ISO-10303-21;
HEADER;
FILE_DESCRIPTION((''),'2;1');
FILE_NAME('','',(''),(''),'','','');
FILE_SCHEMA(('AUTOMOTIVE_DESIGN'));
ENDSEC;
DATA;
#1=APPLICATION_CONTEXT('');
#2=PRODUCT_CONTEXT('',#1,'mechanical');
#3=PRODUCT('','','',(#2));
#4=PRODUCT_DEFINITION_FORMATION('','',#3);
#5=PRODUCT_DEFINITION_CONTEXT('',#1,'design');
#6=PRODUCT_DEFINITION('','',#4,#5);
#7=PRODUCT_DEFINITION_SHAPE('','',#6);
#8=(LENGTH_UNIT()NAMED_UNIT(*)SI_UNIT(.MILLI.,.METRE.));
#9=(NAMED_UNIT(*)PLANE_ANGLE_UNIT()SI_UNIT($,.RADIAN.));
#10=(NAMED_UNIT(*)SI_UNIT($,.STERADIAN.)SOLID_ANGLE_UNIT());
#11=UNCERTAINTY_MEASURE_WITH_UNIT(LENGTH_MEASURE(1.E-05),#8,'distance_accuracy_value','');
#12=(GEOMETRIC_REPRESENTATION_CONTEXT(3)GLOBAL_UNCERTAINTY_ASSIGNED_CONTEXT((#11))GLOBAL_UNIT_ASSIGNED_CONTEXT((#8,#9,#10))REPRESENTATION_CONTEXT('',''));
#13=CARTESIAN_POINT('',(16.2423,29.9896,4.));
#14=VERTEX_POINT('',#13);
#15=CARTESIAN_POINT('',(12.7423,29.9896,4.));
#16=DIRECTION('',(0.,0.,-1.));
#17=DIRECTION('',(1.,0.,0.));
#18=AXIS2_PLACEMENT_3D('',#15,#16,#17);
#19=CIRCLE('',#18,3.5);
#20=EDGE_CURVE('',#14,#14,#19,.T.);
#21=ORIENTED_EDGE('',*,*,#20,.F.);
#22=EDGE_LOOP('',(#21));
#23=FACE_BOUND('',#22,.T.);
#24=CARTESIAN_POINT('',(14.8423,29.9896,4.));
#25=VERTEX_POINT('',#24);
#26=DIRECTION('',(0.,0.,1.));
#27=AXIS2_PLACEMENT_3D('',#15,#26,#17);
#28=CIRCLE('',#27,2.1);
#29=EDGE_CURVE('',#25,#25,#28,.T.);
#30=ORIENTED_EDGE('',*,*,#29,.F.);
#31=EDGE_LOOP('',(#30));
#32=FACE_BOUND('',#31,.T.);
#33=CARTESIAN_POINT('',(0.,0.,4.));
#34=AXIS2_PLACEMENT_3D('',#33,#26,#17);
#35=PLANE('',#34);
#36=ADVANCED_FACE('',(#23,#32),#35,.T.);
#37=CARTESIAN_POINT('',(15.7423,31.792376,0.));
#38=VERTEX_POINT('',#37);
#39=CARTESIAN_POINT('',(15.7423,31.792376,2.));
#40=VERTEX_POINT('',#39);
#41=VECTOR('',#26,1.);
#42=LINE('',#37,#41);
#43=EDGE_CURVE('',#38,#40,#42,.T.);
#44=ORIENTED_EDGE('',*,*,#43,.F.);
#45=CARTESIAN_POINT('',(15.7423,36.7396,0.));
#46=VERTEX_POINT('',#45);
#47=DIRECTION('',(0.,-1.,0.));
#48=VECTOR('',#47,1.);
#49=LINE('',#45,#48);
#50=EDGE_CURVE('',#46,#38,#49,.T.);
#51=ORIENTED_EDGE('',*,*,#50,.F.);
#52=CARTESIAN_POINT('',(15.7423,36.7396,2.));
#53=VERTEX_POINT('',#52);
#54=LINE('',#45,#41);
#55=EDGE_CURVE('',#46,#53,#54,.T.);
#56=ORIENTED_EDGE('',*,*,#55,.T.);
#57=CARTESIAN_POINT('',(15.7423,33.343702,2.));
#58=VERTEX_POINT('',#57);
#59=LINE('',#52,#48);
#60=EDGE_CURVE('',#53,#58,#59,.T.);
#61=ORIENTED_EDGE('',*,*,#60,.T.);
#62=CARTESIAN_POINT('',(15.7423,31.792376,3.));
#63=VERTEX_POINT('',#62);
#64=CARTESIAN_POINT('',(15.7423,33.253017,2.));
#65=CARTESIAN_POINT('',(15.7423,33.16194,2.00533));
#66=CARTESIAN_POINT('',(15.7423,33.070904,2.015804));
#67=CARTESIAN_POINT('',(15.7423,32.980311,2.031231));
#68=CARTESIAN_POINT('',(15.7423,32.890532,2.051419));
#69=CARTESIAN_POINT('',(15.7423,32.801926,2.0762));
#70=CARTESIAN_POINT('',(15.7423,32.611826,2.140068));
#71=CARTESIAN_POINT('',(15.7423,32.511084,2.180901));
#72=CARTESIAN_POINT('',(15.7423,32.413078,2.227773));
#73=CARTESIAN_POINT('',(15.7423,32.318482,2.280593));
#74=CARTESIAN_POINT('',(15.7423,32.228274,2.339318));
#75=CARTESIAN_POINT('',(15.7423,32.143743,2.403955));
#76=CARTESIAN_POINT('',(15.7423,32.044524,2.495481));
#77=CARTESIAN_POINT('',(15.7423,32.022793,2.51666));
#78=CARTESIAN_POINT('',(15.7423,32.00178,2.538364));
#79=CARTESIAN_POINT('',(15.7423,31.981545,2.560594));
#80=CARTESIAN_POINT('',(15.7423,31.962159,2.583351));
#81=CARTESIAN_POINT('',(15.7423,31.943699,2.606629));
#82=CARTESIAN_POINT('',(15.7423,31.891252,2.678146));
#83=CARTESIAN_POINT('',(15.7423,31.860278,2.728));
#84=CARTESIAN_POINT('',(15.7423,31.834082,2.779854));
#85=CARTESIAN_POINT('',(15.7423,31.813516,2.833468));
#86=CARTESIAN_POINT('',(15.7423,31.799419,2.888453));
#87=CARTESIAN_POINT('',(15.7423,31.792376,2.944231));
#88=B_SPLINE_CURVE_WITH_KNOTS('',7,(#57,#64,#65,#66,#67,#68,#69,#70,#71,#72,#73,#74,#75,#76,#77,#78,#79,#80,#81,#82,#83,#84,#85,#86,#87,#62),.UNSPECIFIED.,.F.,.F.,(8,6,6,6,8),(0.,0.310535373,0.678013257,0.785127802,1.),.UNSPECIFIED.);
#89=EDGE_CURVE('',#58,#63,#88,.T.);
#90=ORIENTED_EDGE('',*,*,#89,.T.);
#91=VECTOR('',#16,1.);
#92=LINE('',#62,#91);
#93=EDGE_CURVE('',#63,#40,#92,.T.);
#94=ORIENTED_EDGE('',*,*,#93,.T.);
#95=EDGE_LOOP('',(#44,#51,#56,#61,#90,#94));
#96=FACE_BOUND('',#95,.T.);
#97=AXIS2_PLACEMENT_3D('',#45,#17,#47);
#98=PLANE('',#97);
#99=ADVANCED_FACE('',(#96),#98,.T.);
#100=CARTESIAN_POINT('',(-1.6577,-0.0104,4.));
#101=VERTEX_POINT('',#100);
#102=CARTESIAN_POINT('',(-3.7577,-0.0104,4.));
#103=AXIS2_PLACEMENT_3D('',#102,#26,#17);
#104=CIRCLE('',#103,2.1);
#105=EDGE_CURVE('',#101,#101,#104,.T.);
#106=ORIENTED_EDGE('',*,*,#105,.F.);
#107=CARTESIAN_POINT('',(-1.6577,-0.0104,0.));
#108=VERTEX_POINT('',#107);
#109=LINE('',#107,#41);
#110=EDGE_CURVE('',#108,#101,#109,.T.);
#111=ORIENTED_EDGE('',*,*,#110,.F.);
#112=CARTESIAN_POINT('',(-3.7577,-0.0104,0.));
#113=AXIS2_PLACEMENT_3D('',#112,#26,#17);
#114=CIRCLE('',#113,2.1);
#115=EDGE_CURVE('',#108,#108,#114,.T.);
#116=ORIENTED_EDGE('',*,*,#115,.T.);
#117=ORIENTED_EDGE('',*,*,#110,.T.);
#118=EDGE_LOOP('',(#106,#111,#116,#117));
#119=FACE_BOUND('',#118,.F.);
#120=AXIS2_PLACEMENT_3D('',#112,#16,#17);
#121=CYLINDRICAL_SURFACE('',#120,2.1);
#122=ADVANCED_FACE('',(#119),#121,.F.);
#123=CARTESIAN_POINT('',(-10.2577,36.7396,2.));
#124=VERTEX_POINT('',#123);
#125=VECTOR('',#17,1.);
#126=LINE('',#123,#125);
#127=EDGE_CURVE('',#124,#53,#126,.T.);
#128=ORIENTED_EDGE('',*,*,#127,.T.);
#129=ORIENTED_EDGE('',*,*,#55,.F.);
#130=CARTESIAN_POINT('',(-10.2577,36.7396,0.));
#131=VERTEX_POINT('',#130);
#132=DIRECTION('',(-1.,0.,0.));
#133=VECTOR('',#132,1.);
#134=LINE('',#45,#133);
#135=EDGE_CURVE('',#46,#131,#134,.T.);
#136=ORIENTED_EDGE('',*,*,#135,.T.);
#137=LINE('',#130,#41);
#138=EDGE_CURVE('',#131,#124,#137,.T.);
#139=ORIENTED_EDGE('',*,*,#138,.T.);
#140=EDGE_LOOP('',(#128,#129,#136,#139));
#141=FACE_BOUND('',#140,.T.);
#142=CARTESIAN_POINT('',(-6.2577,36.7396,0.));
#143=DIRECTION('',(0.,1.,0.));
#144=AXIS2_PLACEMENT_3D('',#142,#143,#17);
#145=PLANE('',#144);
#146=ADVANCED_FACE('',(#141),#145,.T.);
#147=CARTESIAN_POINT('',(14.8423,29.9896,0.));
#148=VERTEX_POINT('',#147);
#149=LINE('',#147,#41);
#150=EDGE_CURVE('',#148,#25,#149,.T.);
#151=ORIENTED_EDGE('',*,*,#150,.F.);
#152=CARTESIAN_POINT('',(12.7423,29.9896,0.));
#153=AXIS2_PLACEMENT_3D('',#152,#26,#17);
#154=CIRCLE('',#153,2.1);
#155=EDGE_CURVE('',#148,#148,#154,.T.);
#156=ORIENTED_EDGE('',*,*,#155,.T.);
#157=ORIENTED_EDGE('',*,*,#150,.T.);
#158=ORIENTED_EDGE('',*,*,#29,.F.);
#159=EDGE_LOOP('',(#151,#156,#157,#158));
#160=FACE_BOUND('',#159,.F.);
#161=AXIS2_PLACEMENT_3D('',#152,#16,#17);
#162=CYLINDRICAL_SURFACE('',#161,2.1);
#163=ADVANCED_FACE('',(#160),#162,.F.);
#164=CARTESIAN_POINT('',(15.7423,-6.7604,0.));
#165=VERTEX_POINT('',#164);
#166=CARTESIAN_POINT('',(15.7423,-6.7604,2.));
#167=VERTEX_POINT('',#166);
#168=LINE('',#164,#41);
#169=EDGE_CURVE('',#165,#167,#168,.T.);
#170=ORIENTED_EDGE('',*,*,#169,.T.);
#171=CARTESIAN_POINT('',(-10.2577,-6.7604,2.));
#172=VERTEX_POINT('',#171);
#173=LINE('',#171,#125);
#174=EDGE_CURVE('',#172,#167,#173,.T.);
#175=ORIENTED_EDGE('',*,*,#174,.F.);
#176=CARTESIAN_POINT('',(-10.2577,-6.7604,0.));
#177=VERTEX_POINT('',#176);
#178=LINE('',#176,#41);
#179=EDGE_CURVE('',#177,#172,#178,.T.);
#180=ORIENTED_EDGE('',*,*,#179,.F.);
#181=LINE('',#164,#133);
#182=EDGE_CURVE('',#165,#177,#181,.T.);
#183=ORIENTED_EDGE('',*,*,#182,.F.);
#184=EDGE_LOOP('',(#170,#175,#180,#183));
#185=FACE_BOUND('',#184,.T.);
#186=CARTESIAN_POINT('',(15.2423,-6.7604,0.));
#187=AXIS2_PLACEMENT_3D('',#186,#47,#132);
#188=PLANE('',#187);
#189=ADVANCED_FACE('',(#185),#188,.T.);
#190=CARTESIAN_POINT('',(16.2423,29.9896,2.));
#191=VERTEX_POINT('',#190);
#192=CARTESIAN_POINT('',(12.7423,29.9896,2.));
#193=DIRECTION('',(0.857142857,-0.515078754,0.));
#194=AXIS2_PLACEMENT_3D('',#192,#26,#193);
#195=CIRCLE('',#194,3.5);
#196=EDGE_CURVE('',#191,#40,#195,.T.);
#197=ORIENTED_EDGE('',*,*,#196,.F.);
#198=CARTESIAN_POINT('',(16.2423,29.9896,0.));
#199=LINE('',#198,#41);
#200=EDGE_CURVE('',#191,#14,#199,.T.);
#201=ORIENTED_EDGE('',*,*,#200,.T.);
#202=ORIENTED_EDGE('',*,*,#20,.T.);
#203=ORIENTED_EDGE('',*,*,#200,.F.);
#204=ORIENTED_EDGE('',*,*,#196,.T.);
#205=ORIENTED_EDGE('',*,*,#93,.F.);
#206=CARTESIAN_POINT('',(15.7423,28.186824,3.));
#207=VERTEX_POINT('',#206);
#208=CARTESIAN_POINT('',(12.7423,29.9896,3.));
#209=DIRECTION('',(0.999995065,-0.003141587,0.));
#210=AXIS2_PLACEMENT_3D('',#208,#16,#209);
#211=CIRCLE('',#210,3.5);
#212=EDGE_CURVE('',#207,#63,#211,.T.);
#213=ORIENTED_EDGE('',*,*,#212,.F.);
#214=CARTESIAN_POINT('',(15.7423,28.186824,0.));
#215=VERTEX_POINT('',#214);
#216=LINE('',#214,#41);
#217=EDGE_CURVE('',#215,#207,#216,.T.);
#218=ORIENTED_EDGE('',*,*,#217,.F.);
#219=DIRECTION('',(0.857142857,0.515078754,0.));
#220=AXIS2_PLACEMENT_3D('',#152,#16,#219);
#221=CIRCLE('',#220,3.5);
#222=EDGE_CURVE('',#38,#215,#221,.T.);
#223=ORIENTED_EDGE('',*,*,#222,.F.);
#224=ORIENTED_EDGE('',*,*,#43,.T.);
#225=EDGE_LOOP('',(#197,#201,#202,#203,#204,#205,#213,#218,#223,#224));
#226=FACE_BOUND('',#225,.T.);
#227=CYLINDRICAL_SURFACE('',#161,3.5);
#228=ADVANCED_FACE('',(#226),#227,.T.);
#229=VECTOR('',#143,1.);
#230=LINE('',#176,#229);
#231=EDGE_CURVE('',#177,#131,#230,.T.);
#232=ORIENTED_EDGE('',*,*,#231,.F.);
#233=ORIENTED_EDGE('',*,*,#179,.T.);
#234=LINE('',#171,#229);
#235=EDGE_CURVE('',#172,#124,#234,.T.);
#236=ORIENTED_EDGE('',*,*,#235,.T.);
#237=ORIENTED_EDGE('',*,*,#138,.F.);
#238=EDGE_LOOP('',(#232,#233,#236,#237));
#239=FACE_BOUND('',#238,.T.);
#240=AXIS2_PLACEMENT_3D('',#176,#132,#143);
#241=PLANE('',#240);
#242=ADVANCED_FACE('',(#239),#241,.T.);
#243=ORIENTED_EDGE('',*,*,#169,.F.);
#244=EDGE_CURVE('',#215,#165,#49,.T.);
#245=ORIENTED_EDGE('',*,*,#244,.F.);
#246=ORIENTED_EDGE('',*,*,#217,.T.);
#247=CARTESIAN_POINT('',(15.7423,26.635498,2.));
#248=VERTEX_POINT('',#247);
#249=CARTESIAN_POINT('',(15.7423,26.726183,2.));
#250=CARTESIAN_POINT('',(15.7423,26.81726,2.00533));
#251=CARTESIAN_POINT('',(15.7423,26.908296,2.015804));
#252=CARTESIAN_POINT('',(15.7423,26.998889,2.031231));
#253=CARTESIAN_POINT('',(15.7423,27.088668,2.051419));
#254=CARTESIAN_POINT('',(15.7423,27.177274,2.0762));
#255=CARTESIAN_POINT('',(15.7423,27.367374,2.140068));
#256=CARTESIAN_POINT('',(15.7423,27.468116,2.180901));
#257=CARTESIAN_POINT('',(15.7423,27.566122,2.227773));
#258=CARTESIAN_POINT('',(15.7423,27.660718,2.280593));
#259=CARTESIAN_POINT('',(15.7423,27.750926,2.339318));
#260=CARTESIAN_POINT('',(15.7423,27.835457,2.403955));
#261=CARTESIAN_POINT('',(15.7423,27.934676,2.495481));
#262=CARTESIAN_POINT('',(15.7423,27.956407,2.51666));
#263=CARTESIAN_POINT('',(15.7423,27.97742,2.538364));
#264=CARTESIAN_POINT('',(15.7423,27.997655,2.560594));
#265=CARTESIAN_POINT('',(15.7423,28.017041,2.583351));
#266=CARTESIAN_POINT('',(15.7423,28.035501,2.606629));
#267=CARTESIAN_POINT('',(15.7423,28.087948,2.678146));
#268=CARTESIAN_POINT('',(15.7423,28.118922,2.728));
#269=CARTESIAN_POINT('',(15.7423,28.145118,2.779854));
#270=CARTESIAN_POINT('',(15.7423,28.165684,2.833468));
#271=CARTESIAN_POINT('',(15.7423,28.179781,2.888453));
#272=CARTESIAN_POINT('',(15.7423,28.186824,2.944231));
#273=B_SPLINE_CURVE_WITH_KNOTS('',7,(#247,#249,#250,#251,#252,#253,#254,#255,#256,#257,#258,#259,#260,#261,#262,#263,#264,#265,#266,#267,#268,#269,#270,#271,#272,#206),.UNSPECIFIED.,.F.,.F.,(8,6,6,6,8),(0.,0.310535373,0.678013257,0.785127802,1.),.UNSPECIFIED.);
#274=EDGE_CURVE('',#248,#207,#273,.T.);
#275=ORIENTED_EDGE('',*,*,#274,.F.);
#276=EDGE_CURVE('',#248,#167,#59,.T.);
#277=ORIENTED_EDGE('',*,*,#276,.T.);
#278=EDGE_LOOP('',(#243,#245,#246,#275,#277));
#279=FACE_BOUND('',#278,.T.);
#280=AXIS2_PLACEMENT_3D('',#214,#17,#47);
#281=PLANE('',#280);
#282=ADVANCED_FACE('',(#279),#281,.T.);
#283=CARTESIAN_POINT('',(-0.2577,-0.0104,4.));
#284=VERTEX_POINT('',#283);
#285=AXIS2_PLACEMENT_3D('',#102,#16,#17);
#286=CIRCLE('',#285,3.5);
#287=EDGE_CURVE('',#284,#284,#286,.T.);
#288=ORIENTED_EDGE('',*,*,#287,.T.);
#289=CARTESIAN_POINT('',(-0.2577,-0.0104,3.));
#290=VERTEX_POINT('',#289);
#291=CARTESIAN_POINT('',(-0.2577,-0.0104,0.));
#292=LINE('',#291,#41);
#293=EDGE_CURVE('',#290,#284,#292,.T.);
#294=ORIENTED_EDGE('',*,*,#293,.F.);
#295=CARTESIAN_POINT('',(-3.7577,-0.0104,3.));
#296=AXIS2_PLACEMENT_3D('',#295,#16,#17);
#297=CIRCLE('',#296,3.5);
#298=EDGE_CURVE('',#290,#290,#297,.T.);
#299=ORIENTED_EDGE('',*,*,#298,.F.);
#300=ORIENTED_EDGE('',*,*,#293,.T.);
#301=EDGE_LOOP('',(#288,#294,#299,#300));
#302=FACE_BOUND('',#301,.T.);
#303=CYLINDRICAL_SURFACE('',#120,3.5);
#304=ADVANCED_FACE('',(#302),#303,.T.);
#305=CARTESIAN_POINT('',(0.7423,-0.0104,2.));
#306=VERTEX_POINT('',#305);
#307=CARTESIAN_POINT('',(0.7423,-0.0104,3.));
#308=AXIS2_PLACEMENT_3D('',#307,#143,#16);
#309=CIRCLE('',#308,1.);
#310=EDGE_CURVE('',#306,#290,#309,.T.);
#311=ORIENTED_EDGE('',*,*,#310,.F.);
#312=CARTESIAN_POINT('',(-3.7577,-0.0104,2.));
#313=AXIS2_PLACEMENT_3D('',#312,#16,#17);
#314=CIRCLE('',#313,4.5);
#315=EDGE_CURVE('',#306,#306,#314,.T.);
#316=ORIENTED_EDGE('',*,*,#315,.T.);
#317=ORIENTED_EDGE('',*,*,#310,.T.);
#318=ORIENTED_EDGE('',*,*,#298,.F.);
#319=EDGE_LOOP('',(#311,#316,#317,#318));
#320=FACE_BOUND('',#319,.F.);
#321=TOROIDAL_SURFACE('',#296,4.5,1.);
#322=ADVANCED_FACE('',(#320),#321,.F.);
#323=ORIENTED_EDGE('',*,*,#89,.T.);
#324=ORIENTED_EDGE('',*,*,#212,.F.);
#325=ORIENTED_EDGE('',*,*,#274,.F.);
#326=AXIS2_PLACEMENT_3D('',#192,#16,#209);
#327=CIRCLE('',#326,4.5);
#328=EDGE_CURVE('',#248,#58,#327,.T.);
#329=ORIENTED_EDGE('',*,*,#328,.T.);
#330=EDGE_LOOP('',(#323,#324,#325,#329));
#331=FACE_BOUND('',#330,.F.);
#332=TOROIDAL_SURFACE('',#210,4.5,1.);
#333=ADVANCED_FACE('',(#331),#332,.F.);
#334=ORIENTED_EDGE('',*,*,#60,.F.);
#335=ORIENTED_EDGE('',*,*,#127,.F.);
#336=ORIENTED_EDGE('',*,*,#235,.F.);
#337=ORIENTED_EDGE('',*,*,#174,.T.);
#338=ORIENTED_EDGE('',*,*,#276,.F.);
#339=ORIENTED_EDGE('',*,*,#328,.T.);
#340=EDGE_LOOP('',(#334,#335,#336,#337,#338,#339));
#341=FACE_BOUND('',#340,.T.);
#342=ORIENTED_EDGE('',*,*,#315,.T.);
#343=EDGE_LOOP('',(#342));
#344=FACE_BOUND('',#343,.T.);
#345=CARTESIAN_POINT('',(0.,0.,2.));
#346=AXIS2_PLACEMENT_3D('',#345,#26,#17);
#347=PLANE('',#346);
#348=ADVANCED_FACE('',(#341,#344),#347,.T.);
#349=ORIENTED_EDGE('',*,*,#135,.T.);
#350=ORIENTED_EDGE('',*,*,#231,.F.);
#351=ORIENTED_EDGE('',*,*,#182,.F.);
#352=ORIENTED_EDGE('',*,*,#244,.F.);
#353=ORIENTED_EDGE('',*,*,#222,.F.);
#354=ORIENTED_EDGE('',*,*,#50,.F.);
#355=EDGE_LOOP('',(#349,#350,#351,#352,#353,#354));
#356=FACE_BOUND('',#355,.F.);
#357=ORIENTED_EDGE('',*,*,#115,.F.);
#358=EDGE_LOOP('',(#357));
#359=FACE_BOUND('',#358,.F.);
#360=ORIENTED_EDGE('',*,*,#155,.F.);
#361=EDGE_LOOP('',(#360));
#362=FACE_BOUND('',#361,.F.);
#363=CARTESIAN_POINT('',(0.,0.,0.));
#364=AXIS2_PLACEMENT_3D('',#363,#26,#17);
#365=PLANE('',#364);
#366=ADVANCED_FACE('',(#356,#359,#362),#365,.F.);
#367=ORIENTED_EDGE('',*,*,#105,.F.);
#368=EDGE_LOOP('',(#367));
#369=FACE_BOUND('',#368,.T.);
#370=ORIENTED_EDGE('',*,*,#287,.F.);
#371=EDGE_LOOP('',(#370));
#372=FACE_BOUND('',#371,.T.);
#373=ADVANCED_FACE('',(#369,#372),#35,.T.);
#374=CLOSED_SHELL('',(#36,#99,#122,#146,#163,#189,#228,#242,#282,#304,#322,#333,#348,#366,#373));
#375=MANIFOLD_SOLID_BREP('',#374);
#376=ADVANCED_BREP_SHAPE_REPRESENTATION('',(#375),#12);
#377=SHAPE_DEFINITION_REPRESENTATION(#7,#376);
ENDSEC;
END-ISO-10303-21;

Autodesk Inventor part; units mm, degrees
ref_plane "YZ Plane" through (0, 0, 0) normal (1, 0, 0) x (0, 1, 0)
ref_plane "XZ Plane" through (0, 0, 0) normal (0, 1, 0) x (-1, 0, 0)
ref_plane "XY Plane" through (0, 0, 0) normal (0, 0, 1) x (1, 0, 0)
sketch "Sketch1" plane through (0, 0, 0) normal (0, 0, 1) x (1, 0, 0)
  line L0 (-6.2577, 36.7396) -> (15.2423, 36.7396)
  line L1 (15.2423, 36.7396) -> (15.2423, -6.7604)
  line L2 (15.2423, -6.7604) -> (-6.2577, -6.7604)
  line L3 (-6.2577, -6.7604) -> (-6.2577, 36.7396)
  circle A0 centre (-3.7577, -0.0104) radius 2.1
  circle A1 centre (12.7423, 29.9896) radius 2.1
  circle A2 centre (12.7423, 29.9896) radius 3.5
  circle A3 centre (-3.7577, -0.0104) radius 3.5
  line L4 (-7.7577, 36.7396) -> (15.7423, 36.7396)
  line L5 (15.7423, 36.7396) -> (15.7423, -6.7604)
  line L6 (15.7423, -6.7604) -> (-7.7577, -6.7604)
  line L7 (-7.7577, -6.7604) -> (-7.7577, 36.7396)
  line L8 (-7.7577, -6.7604) -> (-10.2577, -6.7604)
  line L9 (-10.2577, -6.7604) -> (-10.2577, 36.7396)
  line L10 (-10.2577, 36.7396) -> (-7.7577, 36.7396)
  line L11 (-7.7577, 36.7396) -> (-7.7577, -6.7604)
  point P0 (0, 0)
  dimension "d0" = 21.5
  dimension "d1" = 43.5
  dimension "d2" = 6.75
  dimension "d3" = 6.75
  dimension "d4" = 2.5
  dimension "d5" = 2.5
  dimension "d6" = 7
  dimension "d7" = 7
  dimension "d8" = 0
  dimension "d9" = 1.5
  dimension "d10" = 0.5
  dimension "d11" = 0
  dimension "d12" = 2.5
  dimension "d20" = 4.2
  dimension "d21" = 4.2
  dimension "d22" = 43.5
extrude "Base" add sketch "Sketch1" along normal blind 2
extrude "Extrusion2" [suppressed]
extrude "Standoff" add sketch "Sketch1" along normal blind 4 contours A3 L3 | L3 A3 | A2 L5 L1 | L1 A2 | A2 L5
fillet "Fillet1" [suppressed]
fillet "Fillet2" radius 1 2 edges at (-7.2577, -0.0104, 2) (9.2423, 29.9896, 2)
equation "\"d2\" = d3"
equation "\"d22\" = d1"
properties part number "12v regulator bracket"
